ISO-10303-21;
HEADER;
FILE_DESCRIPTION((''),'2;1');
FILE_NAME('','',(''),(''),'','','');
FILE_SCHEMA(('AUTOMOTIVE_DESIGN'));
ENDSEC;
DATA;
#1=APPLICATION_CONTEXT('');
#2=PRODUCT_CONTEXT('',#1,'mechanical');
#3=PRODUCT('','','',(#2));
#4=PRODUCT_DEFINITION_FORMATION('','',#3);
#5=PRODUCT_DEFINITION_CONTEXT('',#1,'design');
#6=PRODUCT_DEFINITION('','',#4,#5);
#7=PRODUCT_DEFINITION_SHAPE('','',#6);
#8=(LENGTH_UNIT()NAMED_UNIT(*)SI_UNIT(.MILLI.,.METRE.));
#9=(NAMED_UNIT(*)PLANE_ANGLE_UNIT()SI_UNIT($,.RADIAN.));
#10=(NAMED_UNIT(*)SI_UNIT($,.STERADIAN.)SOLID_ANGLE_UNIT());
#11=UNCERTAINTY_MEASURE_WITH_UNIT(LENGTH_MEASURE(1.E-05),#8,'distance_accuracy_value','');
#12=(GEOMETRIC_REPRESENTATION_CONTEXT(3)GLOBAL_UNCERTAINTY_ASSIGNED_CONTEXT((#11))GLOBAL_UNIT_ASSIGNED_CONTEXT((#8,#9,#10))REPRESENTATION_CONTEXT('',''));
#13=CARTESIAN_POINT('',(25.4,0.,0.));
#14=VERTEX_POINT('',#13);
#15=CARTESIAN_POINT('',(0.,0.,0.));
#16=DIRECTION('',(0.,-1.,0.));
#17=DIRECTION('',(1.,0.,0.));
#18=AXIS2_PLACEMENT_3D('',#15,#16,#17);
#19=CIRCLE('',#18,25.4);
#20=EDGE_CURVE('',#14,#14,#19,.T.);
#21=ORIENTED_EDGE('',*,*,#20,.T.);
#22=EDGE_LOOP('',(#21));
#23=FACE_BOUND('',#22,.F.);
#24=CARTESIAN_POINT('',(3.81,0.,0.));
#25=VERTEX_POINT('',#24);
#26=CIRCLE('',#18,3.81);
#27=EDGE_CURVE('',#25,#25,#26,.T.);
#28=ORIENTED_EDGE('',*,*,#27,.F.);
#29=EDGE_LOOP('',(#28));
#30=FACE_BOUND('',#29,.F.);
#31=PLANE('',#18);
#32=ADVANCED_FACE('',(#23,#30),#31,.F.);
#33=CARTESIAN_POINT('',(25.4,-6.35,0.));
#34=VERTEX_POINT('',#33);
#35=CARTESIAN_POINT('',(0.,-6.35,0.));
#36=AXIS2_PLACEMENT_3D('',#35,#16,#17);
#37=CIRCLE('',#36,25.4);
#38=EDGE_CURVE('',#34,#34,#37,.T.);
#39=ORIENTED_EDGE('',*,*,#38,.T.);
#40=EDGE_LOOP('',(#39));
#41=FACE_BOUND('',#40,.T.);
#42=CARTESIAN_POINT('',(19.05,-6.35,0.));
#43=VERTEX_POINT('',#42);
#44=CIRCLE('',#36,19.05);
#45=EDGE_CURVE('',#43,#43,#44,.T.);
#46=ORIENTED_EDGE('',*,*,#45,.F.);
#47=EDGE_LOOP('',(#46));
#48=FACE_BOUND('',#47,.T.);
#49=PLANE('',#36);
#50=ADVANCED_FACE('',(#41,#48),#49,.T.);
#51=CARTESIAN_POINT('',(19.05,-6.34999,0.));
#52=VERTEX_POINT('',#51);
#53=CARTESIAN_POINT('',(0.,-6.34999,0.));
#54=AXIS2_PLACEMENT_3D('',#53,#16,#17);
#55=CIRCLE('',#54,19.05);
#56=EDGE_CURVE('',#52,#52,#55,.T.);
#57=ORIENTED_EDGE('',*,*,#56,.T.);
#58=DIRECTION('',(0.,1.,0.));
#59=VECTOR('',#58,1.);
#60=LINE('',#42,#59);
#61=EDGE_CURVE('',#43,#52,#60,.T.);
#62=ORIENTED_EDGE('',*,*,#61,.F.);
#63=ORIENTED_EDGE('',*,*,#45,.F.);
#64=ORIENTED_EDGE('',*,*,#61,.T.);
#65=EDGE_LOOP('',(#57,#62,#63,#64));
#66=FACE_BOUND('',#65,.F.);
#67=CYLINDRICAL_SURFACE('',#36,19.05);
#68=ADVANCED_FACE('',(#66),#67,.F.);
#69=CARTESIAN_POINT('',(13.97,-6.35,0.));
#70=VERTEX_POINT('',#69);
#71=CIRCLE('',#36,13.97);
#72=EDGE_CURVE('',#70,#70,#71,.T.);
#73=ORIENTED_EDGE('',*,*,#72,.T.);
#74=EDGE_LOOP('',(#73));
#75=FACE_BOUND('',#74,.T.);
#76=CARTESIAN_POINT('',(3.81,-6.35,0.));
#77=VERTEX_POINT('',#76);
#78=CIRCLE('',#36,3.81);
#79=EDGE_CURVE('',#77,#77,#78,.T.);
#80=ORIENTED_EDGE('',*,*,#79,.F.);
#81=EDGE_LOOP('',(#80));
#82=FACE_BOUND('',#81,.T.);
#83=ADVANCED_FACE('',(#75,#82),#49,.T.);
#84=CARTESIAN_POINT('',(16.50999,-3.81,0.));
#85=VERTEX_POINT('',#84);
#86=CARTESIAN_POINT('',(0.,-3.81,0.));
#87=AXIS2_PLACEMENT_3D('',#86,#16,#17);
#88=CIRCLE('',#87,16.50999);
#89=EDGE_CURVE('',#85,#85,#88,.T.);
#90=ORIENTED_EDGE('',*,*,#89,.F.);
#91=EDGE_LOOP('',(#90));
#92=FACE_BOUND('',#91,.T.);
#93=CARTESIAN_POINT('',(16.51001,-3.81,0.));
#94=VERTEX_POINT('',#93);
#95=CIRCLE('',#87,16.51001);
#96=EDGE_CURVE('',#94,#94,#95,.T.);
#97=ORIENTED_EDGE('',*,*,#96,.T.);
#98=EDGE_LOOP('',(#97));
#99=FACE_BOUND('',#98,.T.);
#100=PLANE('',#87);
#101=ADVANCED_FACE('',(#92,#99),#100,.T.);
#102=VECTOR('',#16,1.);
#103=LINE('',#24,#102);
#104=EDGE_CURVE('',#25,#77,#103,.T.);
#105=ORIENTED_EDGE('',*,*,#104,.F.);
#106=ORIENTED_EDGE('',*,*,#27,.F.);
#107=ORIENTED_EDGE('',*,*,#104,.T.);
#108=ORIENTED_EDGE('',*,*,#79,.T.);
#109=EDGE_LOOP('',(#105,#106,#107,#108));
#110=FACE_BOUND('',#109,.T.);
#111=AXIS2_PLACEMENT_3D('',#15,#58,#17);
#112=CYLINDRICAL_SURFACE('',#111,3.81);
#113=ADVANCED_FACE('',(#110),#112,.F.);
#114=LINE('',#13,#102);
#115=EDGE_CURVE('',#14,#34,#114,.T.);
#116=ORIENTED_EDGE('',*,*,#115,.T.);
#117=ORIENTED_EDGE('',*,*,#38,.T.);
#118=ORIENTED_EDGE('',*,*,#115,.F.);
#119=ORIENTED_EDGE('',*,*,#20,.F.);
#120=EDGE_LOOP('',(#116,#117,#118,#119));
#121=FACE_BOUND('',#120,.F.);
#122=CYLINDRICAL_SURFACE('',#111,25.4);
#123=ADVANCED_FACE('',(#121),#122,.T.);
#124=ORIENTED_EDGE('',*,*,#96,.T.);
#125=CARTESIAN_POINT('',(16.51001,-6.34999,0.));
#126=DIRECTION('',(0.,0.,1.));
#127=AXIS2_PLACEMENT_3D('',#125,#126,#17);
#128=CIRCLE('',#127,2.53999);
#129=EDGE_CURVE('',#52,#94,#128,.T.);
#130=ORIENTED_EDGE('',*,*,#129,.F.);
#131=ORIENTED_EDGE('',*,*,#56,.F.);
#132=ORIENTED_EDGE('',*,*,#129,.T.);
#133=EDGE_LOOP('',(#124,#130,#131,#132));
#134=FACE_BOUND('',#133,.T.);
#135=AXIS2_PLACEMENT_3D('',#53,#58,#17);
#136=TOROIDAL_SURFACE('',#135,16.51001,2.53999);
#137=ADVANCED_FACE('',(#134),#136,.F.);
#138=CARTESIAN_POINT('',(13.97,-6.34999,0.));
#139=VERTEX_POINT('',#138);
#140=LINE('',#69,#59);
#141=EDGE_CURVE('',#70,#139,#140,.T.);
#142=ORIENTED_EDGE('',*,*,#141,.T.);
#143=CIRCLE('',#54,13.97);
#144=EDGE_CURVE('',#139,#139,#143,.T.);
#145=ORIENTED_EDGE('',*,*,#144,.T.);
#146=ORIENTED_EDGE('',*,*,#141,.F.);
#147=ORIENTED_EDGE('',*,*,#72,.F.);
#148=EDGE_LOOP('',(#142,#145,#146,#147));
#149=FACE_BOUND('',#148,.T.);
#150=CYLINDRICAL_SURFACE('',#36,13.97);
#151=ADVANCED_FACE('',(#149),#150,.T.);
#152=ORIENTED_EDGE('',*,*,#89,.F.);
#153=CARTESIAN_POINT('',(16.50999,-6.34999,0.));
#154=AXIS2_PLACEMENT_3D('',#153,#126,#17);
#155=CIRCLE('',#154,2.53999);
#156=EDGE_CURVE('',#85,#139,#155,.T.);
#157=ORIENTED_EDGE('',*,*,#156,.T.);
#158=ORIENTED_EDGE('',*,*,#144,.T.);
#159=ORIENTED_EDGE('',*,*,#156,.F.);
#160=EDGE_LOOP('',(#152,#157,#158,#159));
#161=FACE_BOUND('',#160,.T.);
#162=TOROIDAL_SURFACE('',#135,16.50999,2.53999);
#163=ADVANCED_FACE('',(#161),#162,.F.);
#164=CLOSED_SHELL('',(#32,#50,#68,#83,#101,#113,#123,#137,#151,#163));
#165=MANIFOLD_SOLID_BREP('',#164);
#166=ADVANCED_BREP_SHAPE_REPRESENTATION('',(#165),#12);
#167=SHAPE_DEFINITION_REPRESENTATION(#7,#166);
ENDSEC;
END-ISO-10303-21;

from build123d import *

# Parameters (mm, degrees)
F0_R     = 25.4
F0_R_2   = 3.81
F1_DEPTH = 6.35
F2_R     = 19.05
F2_R_2   = 13.97
F3_DEPTH = 2.54
F4_R     = 2.53999


# Not quite as in the source:
# - a fillet or chamfer is up to 0.001 mm smaller than in the source, because OpenCascade refuses the exact size


with BuildPart() as f1:
    # F0 (on Front) → F1 (new body)
    with BuildSketch(Plane.XZ):
        Circle(F0_R)
        Circle(F0_R_2, mode=Mode.SUBTRACT)
    extrude(amount=F1_DEPTH)

    # F2 (on face) → F3 (cut)
    with BuildSketch(Plane.XZ.offset(6.35)):
        Circle(F2_R)
        Circle(F2_R_2, mode=Mode.SUBTRACT)
    extrude(amount=-F3_DEPTH, mode=Mode.SUBTRACT)

    # F4 (radius 2.54 in the source; OpenCascade refuses exactly that, so slightly less here)
    f4_edges = [f1.edges().sort_by_distance(p)[0] for p in [
        (-19.05, -3.81, 0),
        (-13.97, -3.81, 0),
    ]]
    fillet(f4_edges, radius=F4_R)


solid = f1.part
